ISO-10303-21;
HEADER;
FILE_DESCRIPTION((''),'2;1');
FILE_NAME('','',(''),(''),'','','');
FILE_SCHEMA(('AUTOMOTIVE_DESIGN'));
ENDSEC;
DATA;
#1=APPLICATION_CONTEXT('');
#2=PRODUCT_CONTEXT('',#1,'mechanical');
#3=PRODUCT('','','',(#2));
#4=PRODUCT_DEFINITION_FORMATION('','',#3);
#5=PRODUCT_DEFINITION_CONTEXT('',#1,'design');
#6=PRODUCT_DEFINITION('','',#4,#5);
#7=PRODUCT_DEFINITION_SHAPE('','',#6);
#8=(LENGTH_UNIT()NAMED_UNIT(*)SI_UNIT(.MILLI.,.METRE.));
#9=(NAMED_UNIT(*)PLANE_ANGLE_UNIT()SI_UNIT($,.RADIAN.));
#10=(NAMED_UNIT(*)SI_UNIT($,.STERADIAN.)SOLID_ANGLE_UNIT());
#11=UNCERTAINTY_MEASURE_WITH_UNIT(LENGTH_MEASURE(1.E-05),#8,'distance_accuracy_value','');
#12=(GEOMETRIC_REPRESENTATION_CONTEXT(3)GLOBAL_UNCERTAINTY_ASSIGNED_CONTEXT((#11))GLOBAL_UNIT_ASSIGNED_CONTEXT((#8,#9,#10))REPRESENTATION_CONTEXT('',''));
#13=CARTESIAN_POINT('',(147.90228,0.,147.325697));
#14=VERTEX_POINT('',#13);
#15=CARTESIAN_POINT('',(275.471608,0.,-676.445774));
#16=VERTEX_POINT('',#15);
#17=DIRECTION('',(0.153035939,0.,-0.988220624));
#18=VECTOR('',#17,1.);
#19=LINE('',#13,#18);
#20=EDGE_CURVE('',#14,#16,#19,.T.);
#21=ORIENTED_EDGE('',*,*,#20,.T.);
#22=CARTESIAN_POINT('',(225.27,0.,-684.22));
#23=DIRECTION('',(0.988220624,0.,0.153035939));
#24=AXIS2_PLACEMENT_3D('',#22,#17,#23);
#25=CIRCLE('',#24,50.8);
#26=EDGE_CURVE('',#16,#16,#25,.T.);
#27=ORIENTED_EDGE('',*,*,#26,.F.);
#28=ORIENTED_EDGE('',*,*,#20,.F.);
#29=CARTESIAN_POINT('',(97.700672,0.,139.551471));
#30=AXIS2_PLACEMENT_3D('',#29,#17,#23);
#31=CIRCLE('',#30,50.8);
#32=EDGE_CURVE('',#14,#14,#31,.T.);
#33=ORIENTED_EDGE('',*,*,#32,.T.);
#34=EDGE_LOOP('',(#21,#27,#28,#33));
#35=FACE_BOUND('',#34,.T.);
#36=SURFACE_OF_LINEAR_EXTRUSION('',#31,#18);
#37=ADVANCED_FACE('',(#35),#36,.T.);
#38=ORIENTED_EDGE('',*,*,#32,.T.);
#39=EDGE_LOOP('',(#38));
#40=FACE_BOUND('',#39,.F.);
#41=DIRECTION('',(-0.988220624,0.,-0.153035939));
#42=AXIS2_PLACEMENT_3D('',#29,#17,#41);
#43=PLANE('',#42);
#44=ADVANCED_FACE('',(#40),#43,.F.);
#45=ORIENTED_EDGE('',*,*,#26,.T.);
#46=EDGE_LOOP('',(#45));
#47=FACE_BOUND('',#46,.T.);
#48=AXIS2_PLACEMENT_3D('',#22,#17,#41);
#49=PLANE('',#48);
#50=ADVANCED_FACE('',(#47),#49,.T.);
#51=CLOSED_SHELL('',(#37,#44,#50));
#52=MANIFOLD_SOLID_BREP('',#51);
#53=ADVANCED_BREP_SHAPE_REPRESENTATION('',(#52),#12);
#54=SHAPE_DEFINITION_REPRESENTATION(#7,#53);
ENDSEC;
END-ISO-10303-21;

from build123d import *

# Parameters (mm, degrees)
F2_R = 50.8


with BuildPart() as f3:
    # F3: sweep along a path in F0
    with BuildLine(Plane.XZ) as f3_path:
        Line((97.700672204, 139.5514710159), (225.27, -684.22))
    # F2 (on face) → F3 (sweep)
    with BuildSketch(Plane(origin=(44.9679880436, 0, -290.3781520159), x_dir=(0.9882206238, 0, 0.1530359391), z_dir=(0.1530359391, 0, -0.9882206238))):
        with Locations((117.9062096564, 0)):
            Circle(F2_R)
    sweep(path=f3_path.line)


solid = f3.part
